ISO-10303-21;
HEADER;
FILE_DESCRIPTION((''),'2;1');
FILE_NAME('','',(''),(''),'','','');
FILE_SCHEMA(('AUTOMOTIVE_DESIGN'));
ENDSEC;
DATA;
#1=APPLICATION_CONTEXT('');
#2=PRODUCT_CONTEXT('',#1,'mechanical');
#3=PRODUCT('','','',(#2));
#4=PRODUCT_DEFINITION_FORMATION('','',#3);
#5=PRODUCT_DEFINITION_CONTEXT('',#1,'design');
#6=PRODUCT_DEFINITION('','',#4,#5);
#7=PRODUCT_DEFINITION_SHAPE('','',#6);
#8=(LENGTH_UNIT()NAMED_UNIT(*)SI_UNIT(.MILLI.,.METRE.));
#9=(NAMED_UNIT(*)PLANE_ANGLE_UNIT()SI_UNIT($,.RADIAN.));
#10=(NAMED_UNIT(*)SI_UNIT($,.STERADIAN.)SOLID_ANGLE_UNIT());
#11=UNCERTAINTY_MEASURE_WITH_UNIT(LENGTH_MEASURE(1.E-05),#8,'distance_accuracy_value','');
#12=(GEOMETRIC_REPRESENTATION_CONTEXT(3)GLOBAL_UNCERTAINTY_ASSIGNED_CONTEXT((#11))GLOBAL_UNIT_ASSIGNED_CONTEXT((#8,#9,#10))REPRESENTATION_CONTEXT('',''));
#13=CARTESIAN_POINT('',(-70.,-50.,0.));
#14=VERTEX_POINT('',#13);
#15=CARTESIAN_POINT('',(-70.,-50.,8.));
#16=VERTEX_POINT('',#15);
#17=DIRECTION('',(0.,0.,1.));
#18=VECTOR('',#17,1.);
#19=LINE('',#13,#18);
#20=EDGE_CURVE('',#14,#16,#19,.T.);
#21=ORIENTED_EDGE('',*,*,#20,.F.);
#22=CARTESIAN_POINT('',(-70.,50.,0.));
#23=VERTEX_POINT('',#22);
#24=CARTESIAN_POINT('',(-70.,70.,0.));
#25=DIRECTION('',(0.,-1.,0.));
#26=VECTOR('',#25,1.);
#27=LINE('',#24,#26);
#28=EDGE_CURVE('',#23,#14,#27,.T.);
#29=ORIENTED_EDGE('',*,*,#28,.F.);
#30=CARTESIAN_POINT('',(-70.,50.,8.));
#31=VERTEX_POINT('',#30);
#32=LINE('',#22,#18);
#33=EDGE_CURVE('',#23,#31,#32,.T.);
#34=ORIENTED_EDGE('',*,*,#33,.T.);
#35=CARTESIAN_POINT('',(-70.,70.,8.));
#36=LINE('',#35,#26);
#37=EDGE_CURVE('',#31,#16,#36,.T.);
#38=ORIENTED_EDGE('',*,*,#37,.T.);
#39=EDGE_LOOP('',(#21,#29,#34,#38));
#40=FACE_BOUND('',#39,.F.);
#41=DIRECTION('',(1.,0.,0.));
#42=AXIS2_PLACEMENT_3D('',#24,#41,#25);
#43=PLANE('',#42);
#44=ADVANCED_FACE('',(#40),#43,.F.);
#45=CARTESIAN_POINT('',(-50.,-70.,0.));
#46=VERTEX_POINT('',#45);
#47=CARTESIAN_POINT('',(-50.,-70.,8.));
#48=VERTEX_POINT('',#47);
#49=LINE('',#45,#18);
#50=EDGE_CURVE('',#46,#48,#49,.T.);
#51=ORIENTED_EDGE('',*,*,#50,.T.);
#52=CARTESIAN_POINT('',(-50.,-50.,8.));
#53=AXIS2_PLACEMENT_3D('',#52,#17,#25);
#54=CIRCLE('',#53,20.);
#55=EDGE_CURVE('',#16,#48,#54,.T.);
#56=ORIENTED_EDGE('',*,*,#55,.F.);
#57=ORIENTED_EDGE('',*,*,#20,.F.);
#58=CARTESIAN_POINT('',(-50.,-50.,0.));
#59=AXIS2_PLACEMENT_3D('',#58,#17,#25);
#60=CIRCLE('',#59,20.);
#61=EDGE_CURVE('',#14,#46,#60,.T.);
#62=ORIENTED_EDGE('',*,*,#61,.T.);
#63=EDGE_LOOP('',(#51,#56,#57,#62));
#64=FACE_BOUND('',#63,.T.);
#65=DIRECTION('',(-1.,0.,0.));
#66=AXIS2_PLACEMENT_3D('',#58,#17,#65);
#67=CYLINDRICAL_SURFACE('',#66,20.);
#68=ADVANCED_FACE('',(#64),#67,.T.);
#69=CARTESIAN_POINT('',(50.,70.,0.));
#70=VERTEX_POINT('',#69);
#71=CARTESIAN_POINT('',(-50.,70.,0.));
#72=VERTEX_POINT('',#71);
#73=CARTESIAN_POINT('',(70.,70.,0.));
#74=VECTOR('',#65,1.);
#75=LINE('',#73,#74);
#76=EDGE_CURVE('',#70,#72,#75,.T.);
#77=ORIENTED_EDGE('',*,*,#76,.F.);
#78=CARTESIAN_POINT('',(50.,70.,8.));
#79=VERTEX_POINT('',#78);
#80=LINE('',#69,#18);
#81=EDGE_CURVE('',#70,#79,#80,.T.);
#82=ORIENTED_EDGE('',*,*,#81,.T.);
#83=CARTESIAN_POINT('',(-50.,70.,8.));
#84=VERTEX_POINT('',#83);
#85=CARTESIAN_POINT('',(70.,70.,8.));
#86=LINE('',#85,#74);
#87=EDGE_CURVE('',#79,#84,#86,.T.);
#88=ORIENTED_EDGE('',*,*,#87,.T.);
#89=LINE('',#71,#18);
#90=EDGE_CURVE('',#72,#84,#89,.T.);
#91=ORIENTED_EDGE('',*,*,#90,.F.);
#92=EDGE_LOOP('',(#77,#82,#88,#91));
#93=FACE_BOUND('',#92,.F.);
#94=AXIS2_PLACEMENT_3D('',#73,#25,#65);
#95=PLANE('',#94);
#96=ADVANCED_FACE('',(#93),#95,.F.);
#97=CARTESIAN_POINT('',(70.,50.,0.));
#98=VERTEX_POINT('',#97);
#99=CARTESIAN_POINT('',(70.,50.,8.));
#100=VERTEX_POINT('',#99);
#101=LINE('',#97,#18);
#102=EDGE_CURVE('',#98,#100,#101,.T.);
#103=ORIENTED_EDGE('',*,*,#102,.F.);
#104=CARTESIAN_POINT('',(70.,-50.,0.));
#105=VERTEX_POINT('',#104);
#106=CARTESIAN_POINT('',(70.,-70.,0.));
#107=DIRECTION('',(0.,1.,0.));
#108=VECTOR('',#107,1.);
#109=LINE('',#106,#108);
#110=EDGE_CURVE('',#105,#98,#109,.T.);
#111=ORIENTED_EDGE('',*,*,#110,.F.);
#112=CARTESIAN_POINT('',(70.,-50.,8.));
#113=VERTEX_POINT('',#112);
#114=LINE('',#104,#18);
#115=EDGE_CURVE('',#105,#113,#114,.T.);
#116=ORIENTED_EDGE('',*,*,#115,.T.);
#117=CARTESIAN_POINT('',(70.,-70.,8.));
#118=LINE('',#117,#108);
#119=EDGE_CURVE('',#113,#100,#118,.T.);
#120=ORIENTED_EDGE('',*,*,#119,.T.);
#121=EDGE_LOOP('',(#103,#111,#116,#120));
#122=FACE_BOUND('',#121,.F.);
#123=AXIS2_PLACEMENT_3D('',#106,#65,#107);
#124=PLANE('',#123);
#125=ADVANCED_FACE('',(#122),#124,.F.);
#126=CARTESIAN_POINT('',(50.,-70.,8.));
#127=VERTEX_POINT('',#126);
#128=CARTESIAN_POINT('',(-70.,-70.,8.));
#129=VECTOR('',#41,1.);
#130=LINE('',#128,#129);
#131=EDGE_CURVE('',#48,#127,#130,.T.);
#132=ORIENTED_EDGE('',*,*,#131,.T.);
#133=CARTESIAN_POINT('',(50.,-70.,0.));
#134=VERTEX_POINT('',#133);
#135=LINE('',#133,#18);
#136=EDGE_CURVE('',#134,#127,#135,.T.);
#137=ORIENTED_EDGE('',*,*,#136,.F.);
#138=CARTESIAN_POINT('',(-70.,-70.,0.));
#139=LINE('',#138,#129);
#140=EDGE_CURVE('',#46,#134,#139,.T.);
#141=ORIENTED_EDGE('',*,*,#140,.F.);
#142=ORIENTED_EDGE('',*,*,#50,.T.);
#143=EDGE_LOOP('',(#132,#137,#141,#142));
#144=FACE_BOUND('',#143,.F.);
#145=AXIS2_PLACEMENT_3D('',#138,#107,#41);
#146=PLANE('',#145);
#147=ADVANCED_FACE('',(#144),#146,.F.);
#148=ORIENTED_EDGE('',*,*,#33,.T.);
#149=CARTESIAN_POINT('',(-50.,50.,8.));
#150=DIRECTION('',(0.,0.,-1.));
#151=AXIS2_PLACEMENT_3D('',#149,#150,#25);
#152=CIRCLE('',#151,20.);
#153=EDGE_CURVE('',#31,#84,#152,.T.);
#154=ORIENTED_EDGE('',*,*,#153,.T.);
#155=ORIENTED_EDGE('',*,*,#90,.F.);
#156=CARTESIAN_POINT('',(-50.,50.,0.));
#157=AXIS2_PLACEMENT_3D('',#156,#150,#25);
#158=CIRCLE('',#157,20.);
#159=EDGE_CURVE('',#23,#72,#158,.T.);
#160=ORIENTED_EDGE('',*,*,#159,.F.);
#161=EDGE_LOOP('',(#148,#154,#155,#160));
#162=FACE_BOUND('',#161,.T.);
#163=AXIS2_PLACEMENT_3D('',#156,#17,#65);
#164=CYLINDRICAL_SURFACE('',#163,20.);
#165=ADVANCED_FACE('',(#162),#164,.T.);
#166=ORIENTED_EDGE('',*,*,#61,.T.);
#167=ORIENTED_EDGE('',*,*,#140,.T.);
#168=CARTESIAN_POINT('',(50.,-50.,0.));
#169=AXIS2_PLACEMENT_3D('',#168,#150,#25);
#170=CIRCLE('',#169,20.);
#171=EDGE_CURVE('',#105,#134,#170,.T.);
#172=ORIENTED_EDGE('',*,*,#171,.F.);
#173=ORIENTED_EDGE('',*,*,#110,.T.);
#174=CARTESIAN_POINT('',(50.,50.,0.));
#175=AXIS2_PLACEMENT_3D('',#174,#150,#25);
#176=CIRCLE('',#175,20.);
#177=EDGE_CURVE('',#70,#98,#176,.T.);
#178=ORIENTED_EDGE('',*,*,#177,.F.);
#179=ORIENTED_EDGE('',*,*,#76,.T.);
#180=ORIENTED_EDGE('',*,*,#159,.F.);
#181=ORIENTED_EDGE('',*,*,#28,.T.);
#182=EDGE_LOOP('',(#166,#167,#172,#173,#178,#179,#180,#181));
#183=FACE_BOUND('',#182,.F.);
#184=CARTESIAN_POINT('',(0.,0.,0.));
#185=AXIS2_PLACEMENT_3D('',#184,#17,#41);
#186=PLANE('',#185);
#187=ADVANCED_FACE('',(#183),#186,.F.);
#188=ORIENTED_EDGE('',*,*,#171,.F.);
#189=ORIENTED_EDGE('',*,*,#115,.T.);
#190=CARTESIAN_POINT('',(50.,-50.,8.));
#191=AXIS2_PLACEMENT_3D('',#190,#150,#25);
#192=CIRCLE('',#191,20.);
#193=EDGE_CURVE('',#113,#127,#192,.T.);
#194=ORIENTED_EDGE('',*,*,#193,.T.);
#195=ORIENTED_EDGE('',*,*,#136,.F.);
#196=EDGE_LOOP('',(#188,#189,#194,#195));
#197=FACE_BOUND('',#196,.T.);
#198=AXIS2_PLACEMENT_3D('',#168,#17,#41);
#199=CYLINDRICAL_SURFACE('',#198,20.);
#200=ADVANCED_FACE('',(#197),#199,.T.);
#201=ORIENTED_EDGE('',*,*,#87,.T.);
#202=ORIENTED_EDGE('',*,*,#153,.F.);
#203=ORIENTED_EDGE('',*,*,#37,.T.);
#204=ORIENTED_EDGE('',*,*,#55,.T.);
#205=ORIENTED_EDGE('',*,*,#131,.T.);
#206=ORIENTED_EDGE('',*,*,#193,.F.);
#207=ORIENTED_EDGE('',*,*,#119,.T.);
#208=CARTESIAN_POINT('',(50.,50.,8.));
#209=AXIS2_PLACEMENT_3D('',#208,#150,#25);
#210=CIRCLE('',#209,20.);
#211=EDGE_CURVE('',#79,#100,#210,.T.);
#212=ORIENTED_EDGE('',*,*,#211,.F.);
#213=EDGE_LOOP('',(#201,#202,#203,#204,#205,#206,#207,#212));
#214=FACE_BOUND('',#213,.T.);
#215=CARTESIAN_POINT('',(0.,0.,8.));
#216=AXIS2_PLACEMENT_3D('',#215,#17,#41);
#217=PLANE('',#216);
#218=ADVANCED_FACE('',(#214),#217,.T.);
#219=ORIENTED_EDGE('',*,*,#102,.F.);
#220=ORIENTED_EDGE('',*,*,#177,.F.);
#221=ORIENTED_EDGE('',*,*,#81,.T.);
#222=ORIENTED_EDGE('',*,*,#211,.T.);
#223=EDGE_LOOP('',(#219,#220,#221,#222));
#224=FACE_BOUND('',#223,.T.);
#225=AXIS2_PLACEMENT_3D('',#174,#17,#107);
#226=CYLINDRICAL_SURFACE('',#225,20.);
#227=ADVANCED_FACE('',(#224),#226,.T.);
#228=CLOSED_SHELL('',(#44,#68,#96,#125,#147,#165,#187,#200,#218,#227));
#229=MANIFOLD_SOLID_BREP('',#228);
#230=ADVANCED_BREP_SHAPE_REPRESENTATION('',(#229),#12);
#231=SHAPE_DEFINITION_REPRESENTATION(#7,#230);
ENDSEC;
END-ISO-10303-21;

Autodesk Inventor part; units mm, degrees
ref_plane "YZ Plane" through (0, 0, 0) normal (1, 0, 0) x (0, 1, 0)
ref_plane "XZ Plane" through (0, 0, 0) normal (0, 1, 0) x (-1, 0, 0)
ref_plane "XY Plane" through (0, 0, 0) normal (0, 0, 1) x (1, 0, 0)
sketch "Sketch1" plane through (0, 0, 0) normal (0, 0, 1) x (1, 0, 0)
  line L0 (-70, -70) -> (70, -70)
  line L1 (70, -70) -> (70, 70)
  line L2 (70, 70) -> (-70, 70)
  line L3 (-70, 70) -> (-70, -70)
  line L4 (-70, -70) -> (70, 70) construction
  line L5 (70, -70) -> (-70, 70) construction
  point P0 (0, 0)
  dimension "d0" = 140
  dimension "d1" = 140
extrude "Plate1" add sketch "Sketch1" along normal blind 8
fillet "Corner Round1" radius 20 4 edges at (70, -70, 4) (-70, -70, 4) (-70, 70, 4) (70, 70, 4)
equation "\"d0\" = d1"
equation "\"d2\" = Thickness"
equation "\"BendReliefWidth\" = Thickness"
equation "\"BendReliefDepth\" = 0.5 * Thickness"
equation "\"CornerReliefSize\" = 4 * Thickness"
equation "\"MinimumRemnant\" = 2 * Thickness"
equation "\"TransitionRadius\" = BendRadius"
equation "\"JacobiRadiusSize\" = BendRadius"
equation "\"GapSize\" = Thickness"
equation "\"Thickness\" = 8"
equation "\"BendRadius\" = 5"
properties part number "TZS 1282 leg plate for filter" material "Steel"
